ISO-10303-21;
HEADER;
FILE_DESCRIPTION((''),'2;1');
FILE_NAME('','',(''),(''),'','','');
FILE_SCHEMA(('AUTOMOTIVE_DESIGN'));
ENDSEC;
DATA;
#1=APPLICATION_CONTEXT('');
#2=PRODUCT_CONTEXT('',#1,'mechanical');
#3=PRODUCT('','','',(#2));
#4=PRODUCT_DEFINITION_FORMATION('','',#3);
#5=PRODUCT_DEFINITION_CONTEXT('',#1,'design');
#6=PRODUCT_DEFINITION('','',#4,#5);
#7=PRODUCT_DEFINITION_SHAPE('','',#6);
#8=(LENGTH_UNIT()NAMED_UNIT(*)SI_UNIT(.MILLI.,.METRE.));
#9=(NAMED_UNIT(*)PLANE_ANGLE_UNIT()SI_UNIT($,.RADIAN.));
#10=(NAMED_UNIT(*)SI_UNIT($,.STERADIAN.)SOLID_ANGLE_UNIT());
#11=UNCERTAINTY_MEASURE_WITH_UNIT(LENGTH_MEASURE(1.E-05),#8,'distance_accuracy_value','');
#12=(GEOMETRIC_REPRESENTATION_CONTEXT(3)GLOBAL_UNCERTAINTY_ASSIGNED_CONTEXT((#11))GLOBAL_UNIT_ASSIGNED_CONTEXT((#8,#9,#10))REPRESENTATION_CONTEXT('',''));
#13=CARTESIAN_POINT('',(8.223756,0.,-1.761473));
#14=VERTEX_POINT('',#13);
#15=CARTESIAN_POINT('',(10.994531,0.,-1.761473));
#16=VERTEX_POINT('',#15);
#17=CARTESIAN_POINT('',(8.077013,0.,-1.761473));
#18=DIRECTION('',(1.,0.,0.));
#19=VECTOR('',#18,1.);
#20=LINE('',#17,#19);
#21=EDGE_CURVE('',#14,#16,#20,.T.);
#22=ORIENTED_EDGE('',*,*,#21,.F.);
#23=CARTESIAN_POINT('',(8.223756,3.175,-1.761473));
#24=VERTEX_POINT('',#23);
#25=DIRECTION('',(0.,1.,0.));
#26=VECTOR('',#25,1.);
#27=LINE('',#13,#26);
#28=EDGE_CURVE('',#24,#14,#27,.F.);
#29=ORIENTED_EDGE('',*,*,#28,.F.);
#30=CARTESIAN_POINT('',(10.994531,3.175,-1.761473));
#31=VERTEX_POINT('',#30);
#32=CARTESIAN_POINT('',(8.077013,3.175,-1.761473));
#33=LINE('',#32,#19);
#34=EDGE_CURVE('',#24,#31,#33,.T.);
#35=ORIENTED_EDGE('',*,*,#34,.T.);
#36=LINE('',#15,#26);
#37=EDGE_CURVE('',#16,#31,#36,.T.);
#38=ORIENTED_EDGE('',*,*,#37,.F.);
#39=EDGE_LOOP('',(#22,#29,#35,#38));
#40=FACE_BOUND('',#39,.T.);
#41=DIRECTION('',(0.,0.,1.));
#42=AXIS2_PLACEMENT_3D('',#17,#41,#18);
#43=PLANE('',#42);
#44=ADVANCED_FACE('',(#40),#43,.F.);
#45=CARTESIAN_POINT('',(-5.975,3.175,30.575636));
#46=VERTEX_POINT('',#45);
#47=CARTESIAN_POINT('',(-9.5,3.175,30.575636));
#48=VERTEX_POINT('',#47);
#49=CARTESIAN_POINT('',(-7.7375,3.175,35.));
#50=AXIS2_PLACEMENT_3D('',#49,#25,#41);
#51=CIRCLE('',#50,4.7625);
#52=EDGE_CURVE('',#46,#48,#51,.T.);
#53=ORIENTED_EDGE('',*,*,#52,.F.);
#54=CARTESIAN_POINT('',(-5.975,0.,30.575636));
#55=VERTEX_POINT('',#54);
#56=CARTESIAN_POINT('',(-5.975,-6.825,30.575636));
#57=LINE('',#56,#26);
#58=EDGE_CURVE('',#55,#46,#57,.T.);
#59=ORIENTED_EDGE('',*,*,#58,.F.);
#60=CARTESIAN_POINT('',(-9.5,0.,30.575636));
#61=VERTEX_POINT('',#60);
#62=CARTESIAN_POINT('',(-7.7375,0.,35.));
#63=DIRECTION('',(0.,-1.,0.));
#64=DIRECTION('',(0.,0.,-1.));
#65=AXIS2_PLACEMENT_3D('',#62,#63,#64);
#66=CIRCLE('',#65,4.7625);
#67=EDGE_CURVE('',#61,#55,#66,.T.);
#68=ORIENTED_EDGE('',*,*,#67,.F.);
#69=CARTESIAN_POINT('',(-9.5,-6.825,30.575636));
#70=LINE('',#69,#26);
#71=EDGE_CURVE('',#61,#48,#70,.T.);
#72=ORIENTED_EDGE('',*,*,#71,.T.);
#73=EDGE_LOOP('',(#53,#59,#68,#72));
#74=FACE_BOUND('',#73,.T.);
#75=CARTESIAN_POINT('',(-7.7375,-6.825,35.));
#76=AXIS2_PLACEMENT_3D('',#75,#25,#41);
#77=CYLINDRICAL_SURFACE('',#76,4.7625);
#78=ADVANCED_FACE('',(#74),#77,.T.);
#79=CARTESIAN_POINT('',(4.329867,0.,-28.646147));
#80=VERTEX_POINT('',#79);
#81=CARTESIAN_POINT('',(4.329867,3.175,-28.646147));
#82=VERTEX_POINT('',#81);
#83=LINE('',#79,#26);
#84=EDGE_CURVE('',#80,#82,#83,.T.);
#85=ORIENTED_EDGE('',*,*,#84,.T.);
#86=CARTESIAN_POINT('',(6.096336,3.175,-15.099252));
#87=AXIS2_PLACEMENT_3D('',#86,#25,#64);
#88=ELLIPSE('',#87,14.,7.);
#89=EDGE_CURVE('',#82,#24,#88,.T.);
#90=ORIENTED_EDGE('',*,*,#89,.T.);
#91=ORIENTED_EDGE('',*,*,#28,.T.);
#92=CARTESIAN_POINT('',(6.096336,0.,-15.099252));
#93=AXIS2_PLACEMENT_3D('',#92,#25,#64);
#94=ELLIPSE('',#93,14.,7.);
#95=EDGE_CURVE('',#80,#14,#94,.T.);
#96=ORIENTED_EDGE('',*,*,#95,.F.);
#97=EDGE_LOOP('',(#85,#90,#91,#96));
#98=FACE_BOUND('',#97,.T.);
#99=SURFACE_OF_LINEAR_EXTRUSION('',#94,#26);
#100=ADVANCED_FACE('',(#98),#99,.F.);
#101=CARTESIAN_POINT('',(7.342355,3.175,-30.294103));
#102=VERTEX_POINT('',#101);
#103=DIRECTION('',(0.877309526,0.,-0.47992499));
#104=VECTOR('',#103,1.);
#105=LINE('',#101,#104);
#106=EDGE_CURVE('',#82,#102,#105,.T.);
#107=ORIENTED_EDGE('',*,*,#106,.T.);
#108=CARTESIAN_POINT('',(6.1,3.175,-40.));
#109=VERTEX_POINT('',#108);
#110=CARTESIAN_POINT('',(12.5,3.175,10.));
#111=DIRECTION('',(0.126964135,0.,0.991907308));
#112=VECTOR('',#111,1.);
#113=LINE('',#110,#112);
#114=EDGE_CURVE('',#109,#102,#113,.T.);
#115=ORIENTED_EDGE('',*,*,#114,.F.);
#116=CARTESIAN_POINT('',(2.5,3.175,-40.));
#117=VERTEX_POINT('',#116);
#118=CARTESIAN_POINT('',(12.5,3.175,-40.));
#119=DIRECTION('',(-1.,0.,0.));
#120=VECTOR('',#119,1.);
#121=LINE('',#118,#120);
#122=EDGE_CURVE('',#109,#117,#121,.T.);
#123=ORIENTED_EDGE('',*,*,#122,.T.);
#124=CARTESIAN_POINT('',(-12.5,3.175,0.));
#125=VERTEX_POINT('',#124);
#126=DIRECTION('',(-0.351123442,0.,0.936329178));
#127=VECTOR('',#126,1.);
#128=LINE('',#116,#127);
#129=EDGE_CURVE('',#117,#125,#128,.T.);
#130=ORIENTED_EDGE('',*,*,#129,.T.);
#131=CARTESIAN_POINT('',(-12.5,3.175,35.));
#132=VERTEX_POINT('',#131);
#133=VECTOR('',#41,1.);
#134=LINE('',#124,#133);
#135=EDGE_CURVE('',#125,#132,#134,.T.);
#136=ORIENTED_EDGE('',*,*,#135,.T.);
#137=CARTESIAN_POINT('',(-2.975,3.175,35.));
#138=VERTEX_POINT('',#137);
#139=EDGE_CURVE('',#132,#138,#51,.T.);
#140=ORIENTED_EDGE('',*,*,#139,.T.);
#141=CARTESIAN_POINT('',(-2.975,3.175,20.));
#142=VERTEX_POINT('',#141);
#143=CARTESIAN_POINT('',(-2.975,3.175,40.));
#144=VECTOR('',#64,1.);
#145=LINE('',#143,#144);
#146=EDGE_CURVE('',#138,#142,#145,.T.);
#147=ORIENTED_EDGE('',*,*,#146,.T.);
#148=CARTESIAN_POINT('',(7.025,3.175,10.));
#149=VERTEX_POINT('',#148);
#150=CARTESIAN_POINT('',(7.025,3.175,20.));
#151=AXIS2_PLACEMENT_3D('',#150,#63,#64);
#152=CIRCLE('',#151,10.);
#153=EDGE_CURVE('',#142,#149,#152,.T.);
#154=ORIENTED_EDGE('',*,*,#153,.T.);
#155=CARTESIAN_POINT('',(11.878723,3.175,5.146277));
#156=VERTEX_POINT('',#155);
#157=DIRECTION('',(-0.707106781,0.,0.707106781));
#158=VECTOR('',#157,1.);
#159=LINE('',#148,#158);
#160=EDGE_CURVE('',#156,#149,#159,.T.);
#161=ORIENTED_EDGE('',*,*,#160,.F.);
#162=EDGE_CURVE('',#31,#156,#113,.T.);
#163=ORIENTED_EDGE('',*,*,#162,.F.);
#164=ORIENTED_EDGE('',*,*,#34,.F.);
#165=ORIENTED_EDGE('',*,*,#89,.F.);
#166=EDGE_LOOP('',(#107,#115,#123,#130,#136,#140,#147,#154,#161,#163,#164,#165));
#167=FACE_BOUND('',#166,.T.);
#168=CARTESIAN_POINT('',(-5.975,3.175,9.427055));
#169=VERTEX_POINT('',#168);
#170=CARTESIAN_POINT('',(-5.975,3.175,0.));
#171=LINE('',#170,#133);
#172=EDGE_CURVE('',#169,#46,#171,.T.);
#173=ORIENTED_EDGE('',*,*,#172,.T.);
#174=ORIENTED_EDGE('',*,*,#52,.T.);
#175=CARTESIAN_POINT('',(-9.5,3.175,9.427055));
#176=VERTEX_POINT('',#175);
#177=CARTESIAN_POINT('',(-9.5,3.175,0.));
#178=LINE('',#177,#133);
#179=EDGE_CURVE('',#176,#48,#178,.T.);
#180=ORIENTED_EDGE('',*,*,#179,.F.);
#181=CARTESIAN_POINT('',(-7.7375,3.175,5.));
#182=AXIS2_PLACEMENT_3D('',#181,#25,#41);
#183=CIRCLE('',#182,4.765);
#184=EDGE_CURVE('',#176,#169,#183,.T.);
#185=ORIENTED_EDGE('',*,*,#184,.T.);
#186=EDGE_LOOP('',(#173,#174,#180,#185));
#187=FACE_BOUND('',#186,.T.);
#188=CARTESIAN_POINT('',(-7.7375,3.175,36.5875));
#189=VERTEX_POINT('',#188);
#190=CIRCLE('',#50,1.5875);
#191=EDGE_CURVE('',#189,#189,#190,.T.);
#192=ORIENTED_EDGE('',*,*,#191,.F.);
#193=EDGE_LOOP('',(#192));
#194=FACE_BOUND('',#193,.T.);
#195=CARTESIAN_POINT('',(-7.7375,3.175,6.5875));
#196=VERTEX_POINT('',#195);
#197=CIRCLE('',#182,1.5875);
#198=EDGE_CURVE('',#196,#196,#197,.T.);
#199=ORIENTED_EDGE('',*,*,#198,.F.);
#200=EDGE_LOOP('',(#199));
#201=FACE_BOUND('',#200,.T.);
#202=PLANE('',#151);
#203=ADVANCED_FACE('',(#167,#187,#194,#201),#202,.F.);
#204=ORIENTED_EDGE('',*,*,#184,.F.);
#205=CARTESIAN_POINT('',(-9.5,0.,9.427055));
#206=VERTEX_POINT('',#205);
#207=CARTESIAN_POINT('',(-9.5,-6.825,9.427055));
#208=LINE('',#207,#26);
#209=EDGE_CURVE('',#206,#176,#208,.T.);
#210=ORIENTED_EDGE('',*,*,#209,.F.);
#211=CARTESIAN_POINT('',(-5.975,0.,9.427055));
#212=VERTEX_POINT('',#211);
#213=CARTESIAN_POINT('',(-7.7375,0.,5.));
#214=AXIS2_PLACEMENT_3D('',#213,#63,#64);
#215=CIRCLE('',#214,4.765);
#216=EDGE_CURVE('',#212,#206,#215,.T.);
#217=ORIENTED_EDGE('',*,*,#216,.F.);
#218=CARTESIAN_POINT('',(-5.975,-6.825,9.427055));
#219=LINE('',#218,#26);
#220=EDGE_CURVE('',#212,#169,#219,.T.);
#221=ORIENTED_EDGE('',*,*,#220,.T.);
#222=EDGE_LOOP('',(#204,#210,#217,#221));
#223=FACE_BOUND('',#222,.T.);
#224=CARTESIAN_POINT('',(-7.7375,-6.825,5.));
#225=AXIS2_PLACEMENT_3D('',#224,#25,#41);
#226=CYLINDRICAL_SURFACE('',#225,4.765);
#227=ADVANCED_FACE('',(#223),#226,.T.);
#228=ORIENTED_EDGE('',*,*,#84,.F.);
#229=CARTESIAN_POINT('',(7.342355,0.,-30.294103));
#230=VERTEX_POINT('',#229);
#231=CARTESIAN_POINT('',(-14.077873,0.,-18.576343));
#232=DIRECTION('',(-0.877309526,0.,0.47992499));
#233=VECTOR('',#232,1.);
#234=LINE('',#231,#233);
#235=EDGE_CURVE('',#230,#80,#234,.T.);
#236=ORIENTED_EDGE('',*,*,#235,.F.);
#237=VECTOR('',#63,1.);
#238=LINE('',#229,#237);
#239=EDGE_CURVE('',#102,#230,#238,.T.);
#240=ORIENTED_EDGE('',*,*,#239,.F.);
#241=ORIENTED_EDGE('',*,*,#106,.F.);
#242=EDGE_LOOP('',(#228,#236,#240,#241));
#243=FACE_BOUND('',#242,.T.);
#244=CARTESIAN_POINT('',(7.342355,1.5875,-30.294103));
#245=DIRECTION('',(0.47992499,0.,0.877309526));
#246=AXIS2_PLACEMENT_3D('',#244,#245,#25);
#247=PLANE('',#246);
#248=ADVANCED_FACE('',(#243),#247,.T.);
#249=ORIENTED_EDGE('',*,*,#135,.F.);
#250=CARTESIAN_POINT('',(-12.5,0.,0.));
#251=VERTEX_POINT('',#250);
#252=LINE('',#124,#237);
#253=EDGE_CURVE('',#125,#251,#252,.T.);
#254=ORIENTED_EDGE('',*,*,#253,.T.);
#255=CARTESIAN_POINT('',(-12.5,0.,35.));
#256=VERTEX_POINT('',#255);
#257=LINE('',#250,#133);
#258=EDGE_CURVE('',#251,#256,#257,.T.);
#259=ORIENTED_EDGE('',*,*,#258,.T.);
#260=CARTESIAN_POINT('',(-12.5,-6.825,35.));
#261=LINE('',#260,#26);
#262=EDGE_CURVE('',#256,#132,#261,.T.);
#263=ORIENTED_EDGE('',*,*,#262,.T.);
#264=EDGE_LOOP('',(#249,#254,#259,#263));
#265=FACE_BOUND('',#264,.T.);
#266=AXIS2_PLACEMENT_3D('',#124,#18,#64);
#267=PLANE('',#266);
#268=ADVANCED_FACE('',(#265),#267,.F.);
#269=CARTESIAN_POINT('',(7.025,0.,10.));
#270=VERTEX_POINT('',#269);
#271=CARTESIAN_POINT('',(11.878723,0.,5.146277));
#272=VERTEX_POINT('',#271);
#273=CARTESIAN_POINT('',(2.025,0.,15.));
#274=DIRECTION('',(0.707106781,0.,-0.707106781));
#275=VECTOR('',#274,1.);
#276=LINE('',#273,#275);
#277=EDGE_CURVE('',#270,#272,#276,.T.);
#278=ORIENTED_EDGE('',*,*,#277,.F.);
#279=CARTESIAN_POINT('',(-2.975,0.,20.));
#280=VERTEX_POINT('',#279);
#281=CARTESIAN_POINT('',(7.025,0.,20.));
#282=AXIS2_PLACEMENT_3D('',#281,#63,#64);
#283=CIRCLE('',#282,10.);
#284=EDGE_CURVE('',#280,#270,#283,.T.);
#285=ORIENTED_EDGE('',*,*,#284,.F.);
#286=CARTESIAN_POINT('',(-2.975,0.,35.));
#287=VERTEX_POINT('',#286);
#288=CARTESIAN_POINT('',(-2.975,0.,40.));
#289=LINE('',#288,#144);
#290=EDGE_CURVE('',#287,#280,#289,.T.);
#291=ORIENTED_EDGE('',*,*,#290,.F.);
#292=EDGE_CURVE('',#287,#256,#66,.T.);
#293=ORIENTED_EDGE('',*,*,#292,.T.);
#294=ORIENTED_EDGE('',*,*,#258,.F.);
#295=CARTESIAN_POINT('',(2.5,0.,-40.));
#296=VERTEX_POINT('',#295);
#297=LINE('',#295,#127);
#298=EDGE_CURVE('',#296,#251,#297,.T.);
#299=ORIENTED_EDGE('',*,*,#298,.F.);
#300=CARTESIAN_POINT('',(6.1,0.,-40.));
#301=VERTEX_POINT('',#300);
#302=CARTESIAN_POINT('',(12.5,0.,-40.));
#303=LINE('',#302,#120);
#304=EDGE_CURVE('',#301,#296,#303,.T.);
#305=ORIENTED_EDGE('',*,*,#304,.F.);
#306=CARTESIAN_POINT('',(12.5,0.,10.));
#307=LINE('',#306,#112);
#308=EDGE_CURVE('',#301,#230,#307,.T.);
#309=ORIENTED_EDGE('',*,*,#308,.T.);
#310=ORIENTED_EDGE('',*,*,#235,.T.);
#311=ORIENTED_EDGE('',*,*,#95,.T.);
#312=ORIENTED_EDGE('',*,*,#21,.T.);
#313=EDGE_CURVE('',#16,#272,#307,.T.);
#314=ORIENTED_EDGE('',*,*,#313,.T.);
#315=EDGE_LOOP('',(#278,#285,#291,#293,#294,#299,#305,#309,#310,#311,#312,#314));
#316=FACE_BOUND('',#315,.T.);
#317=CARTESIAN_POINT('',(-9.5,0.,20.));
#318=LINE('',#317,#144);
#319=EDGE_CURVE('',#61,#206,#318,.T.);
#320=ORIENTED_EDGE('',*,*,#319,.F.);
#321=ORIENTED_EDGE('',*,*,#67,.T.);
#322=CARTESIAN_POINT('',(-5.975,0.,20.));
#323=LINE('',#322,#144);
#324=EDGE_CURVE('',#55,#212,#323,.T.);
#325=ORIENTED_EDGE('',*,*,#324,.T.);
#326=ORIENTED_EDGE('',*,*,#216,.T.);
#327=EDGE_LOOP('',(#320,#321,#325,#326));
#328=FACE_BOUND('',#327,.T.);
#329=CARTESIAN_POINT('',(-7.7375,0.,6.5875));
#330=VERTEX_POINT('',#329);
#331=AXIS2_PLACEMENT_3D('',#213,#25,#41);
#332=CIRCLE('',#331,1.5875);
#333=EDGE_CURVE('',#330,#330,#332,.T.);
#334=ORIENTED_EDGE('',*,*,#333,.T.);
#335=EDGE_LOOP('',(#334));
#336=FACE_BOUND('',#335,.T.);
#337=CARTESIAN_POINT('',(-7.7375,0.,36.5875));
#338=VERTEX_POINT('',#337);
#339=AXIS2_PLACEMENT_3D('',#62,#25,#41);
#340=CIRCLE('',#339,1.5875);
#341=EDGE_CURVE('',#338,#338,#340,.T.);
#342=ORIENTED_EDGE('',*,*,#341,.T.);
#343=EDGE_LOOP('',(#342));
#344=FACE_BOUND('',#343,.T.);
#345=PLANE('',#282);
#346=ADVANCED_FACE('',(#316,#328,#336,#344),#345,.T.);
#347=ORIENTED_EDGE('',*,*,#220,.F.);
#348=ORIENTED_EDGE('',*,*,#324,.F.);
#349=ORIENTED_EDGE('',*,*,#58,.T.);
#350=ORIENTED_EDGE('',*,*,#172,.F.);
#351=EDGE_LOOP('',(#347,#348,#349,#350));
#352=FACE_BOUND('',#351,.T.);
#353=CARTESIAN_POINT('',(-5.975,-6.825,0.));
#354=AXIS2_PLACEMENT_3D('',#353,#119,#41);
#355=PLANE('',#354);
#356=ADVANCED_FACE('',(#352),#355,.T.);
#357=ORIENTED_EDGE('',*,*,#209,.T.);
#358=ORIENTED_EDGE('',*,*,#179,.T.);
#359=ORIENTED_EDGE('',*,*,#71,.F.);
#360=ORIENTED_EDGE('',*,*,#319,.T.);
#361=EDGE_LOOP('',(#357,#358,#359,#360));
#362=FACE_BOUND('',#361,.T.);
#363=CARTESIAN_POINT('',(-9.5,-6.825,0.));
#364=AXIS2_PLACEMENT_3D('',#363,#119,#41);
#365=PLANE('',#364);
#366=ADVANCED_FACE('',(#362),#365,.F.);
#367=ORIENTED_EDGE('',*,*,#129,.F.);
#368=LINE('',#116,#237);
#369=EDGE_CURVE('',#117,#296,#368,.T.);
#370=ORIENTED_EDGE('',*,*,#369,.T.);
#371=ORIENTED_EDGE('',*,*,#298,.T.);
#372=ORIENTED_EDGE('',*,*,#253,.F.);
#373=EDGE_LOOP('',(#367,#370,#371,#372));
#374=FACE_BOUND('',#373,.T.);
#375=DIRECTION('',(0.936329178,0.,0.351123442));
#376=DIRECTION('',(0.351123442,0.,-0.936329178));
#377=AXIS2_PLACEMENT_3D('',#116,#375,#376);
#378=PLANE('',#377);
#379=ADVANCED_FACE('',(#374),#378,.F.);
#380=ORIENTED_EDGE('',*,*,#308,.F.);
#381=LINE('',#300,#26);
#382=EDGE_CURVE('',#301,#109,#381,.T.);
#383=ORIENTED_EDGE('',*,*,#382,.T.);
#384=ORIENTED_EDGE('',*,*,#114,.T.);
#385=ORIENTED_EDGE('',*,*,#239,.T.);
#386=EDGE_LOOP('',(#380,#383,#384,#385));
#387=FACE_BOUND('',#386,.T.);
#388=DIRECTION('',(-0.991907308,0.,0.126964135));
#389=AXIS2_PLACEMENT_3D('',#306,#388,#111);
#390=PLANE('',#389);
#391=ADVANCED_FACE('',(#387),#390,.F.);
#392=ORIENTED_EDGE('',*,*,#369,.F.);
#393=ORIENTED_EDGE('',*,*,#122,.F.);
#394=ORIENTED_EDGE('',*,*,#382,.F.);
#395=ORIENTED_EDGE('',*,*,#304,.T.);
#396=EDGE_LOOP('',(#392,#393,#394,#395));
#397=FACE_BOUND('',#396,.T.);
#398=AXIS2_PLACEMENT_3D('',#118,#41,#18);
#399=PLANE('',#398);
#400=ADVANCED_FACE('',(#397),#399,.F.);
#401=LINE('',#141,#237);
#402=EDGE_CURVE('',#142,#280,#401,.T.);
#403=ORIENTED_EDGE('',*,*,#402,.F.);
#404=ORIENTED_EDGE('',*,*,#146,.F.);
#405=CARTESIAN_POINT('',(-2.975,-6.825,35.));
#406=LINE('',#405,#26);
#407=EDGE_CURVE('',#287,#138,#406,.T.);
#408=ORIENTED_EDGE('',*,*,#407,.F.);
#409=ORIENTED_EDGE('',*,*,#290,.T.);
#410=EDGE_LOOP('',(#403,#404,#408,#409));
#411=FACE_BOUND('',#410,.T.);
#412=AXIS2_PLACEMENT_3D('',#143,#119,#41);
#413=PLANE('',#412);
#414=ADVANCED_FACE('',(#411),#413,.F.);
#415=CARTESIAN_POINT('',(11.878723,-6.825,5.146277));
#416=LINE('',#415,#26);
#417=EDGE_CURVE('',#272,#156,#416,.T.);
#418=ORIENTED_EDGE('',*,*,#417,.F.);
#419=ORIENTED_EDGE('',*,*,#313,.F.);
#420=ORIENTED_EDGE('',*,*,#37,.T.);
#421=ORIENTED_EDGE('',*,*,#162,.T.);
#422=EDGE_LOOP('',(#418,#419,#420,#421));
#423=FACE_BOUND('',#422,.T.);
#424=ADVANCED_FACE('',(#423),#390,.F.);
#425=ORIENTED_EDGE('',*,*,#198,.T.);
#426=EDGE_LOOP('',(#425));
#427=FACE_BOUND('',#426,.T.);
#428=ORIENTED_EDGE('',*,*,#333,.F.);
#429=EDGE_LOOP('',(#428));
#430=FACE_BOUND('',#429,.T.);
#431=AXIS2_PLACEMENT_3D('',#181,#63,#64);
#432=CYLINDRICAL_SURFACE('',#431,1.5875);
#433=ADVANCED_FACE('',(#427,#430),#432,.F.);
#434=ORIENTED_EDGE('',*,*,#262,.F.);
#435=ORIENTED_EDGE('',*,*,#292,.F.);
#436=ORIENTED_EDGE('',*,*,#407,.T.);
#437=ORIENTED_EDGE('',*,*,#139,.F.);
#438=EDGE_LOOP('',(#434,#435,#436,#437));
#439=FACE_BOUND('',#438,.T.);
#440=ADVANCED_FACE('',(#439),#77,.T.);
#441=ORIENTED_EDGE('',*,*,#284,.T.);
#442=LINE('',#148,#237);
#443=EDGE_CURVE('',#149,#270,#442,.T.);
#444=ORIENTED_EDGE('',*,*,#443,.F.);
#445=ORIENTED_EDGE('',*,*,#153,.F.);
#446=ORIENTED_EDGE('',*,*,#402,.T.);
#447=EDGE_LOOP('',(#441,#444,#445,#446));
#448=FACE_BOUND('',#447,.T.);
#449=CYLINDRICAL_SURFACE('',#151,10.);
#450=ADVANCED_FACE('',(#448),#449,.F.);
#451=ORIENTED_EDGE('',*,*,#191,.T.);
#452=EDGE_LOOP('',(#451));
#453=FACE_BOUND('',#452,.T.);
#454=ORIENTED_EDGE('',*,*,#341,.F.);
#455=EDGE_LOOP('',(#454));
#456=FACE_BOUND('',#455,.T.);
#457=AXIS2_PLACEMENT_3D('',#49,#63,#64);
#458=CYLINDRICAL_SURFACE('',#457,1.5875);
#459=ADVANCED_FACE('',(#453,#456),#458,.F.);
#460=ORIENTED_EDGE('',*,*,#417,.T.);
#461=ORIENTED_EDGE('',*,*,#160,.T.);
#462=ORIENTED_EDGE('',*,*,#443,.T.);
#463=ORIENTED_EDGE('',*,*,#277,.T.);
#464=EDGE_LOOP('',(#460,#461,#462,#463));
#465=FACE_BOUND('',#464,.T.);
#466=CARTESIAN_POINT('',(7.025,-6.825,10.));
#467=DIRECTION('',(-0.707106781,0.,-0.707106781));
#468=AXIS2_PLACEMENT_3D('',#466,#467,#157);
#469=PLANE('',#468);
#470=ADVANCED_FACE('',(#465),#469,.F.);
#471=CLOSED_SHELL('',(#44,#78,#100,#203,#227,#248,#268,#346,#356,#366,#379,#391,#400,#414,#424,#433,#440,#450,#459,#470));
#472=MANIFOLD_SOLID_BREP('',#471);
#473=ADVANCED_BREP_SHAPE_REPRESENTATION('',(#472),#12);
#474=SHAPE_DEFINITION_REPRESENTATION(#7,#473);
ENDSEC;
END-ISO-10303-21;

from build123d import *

# Parameters (mm, degrees)
CROQUIS1_R              = 1.5875
SALIENTE_EXTRUIR1_DEPTH = 3.175
CORTAR_EXTRUIR1_DEPTH   = 3.175
CORTAR_EXTRUIR3_DEPTH   = 10
CROQUIS5_R              = 10
CORTAR_EXTRUIR8_DEPTH   = 10
REDONDEO2_R             = 2
ESQUISSE1_RX            = 14
ESQUISSE1_RY            = 7
ENL_V_MAT_EXTRU_1_DEPTH = 43.027736377
ESQUISSE2_W             = 6.812613354
ESQUISSE2_H             = 3.3
ENL_V_MAT_EXTRU_2_DEPTH = 43.027736555


with BuildPart() as part:
    # Croquis1 → Saliente-Extruir1 (new body)
    with BuildSketch(Plane(origin=(0, 0, 0), x_dir=(1, 0, 0), z_dir=(0, 1, 0))):
        with BuildLine():
            Line((-12.5, 0), (-12.5, -40))
            Line((-12.5, -40), (-2.975, -40))
            Line((-2.975, -40), (-2.975, -20))
            ThreePointArc((-2.975, -20), (-0.046067812, -12.928932188), (7.025, -10))
            Line((7.025, -10), (12.5, -10))
            Line((12.5, -10), (12.5, 40))
            Line((12.5, 40), (2.5, 40))
            Line((2.5, 40), (-12.5, 0))
        make_face()
        with Locations(Location((-7.7375, -5, 0), (0, 0, 270))):
            Circle(CROQUIS1_R, mode=Mode.SUBTRACT)
        with Locations(Location((-7.7375, -35, 0), (0, 0, 270))):
            Circle(CROQUIS1_R, mode=Mode.SUBTRACT)
    extrude(amount=SALIENTE_EXTRUIR1_DEPTH)

    # Croquis2 → Cortar-Extruir1 (cut)
    with BuildSketch(Plane(origin=(0, 3.175, 0), x_dir=(1, 0, 0), z_dir=(0, 1, 0))):
        Polygon((12.5, -10), (6.1, 40), (12.5, 40), align=None)
    extrude(amount=-CORTAR_EXTRUIR1_DEPTH, mode=Mode.SUBTRACT)

    # Croquis3 → Cortar-Extruir3 (cut)
    with BuildSketch(Plane(origin=(0, 3.175, 0), x_dir=(1, 0, 0), z_dir=(0, 1, 0))):
        with BuildLine():
            ThreePointArc((-5.975, -30.575635639), (-7.7375, -30.2375), (-9.5, -30.575635639))
            Line((-9.5, -30.575635639), (-9.5, -9.427055314))
            ThreePointArc((-9.5, -9.427055314), (-7.7375, -9.765), (-5.975, -9.427055314))
            Line((-5.975, -9.427055314), (-5.975, -14.803847577))
            Line((-5.975, -14.803847577), (-5.975, -30.575635639))
        make_face()
        with BuildLine():
            ThreePointArc((-12.5, -35), (-7.7375, -39.7625), (-2.975, -35))
            Line((-2.975, -35), (-2.975, -40))
            Line((-2.975, -40), (-12.5, -40))
            Line((-12.5, -40), (-12.5, -35))
        make_face()
    extrude(amount=-CORTAR_EXTRUIR3_DEPTH, mode=Mode.SUBTRACT)

    # Croquis5 → Cortar-Extruir8 (cut)
    with BuildSketch(Plane(origin=(0, 3.175, 0), x_dir=(1, 0, 0), z_dir=(0, 1, 0))):
        with Locations((9.3, 15)):
            Circle(CROQUIS5_R)
        Polygon((7.025, -10), (11.878723404, -5.146276596), (12.5, -10), align=None)
    extrude(amount=-CORTAR_EXTRUIR8_DEPTH, mode=Mode.SUBTRACT)

    # Redondeo2
    redondeo2_edges = [part.edges().sort_by_distance(p)[0] for p in [
        (8.030358645, 1.5875, -24.919073083),
        (10.569641355, 1.5875, -5.080926917),
    ]]
    fillet(redondeo2_edges, radius=REDONDEO2_R)

    # Esquisse1 → Enlèv. mat.-Extru.1 (cut, through all)
    with BuildSketch(Plane(origin=(0, 3.175, 0), x_dir=(1, 0, 0), z_dir=(0, 1, 0))):
        with Locations(Location((6.096336345, 15.099252248), (0, 0, -90))):
            Ellipse(ESQUISSE1_RX, ESQUISSE1_RY)
    extrude(amount=-ENL_V_MAT_EXTRU_1_DEPTH, mode=Mode.SUBTRACT)

    # Esquisse2 → Enlèv. mat.-Extru.2 (cut, through all)
    with BuildSketch(Plane(origin=(0, 3.175, 0), x_dir=(1, 0, 0), z_dir=(0, 1, 0))):
        with Locations((11.483320122, 3.411473453)):
            Rectangle(ESQUISSE2_W, ESQUISSE2_H)
    extrude(amount=-ENL_V_MAT_EXTRU_2_DEPTH, mode=Mode.SUBTRACT)

    # Chanfrein1
    # the kernel refuses this chamfer: 5, 3.65932295 mm, written as the material it takes off along each edge
    with BuildSketch(Plane(origin=(7.533468678, -8.470907308, -28.801025952), x_dir=(-0.009849351174311172, 0, -0.9999514939643048), z_dir=(0, 1, 0))) as chanfrein1_piece_1:
        with BuildLine():
            Line((1.589139403, 0), (-0.217570658, 3.381370478))
            Line((-0.217570658, 3.381370478), (-0.306685884, 3.336000041))
            ThreePointArc((-0.306685884, 3.336000041), (0.203744233, 1.713157434), (-0.091827617, 0.03959405))
            Line((-0.091827617, 0.03959405), (0.011718833, -0.099310971))
            ThreePointArc((0.011718833, -0.099310971), (0.795376625, -0.006838256), (1.600858236, -0.099310971))
            Line((1.600858236, -0.099310971), (1.589139403, 0))
        make_face()
    extrude(amount=20.116814349, mode=Mode.SUBTRACT)


solid = part.part
